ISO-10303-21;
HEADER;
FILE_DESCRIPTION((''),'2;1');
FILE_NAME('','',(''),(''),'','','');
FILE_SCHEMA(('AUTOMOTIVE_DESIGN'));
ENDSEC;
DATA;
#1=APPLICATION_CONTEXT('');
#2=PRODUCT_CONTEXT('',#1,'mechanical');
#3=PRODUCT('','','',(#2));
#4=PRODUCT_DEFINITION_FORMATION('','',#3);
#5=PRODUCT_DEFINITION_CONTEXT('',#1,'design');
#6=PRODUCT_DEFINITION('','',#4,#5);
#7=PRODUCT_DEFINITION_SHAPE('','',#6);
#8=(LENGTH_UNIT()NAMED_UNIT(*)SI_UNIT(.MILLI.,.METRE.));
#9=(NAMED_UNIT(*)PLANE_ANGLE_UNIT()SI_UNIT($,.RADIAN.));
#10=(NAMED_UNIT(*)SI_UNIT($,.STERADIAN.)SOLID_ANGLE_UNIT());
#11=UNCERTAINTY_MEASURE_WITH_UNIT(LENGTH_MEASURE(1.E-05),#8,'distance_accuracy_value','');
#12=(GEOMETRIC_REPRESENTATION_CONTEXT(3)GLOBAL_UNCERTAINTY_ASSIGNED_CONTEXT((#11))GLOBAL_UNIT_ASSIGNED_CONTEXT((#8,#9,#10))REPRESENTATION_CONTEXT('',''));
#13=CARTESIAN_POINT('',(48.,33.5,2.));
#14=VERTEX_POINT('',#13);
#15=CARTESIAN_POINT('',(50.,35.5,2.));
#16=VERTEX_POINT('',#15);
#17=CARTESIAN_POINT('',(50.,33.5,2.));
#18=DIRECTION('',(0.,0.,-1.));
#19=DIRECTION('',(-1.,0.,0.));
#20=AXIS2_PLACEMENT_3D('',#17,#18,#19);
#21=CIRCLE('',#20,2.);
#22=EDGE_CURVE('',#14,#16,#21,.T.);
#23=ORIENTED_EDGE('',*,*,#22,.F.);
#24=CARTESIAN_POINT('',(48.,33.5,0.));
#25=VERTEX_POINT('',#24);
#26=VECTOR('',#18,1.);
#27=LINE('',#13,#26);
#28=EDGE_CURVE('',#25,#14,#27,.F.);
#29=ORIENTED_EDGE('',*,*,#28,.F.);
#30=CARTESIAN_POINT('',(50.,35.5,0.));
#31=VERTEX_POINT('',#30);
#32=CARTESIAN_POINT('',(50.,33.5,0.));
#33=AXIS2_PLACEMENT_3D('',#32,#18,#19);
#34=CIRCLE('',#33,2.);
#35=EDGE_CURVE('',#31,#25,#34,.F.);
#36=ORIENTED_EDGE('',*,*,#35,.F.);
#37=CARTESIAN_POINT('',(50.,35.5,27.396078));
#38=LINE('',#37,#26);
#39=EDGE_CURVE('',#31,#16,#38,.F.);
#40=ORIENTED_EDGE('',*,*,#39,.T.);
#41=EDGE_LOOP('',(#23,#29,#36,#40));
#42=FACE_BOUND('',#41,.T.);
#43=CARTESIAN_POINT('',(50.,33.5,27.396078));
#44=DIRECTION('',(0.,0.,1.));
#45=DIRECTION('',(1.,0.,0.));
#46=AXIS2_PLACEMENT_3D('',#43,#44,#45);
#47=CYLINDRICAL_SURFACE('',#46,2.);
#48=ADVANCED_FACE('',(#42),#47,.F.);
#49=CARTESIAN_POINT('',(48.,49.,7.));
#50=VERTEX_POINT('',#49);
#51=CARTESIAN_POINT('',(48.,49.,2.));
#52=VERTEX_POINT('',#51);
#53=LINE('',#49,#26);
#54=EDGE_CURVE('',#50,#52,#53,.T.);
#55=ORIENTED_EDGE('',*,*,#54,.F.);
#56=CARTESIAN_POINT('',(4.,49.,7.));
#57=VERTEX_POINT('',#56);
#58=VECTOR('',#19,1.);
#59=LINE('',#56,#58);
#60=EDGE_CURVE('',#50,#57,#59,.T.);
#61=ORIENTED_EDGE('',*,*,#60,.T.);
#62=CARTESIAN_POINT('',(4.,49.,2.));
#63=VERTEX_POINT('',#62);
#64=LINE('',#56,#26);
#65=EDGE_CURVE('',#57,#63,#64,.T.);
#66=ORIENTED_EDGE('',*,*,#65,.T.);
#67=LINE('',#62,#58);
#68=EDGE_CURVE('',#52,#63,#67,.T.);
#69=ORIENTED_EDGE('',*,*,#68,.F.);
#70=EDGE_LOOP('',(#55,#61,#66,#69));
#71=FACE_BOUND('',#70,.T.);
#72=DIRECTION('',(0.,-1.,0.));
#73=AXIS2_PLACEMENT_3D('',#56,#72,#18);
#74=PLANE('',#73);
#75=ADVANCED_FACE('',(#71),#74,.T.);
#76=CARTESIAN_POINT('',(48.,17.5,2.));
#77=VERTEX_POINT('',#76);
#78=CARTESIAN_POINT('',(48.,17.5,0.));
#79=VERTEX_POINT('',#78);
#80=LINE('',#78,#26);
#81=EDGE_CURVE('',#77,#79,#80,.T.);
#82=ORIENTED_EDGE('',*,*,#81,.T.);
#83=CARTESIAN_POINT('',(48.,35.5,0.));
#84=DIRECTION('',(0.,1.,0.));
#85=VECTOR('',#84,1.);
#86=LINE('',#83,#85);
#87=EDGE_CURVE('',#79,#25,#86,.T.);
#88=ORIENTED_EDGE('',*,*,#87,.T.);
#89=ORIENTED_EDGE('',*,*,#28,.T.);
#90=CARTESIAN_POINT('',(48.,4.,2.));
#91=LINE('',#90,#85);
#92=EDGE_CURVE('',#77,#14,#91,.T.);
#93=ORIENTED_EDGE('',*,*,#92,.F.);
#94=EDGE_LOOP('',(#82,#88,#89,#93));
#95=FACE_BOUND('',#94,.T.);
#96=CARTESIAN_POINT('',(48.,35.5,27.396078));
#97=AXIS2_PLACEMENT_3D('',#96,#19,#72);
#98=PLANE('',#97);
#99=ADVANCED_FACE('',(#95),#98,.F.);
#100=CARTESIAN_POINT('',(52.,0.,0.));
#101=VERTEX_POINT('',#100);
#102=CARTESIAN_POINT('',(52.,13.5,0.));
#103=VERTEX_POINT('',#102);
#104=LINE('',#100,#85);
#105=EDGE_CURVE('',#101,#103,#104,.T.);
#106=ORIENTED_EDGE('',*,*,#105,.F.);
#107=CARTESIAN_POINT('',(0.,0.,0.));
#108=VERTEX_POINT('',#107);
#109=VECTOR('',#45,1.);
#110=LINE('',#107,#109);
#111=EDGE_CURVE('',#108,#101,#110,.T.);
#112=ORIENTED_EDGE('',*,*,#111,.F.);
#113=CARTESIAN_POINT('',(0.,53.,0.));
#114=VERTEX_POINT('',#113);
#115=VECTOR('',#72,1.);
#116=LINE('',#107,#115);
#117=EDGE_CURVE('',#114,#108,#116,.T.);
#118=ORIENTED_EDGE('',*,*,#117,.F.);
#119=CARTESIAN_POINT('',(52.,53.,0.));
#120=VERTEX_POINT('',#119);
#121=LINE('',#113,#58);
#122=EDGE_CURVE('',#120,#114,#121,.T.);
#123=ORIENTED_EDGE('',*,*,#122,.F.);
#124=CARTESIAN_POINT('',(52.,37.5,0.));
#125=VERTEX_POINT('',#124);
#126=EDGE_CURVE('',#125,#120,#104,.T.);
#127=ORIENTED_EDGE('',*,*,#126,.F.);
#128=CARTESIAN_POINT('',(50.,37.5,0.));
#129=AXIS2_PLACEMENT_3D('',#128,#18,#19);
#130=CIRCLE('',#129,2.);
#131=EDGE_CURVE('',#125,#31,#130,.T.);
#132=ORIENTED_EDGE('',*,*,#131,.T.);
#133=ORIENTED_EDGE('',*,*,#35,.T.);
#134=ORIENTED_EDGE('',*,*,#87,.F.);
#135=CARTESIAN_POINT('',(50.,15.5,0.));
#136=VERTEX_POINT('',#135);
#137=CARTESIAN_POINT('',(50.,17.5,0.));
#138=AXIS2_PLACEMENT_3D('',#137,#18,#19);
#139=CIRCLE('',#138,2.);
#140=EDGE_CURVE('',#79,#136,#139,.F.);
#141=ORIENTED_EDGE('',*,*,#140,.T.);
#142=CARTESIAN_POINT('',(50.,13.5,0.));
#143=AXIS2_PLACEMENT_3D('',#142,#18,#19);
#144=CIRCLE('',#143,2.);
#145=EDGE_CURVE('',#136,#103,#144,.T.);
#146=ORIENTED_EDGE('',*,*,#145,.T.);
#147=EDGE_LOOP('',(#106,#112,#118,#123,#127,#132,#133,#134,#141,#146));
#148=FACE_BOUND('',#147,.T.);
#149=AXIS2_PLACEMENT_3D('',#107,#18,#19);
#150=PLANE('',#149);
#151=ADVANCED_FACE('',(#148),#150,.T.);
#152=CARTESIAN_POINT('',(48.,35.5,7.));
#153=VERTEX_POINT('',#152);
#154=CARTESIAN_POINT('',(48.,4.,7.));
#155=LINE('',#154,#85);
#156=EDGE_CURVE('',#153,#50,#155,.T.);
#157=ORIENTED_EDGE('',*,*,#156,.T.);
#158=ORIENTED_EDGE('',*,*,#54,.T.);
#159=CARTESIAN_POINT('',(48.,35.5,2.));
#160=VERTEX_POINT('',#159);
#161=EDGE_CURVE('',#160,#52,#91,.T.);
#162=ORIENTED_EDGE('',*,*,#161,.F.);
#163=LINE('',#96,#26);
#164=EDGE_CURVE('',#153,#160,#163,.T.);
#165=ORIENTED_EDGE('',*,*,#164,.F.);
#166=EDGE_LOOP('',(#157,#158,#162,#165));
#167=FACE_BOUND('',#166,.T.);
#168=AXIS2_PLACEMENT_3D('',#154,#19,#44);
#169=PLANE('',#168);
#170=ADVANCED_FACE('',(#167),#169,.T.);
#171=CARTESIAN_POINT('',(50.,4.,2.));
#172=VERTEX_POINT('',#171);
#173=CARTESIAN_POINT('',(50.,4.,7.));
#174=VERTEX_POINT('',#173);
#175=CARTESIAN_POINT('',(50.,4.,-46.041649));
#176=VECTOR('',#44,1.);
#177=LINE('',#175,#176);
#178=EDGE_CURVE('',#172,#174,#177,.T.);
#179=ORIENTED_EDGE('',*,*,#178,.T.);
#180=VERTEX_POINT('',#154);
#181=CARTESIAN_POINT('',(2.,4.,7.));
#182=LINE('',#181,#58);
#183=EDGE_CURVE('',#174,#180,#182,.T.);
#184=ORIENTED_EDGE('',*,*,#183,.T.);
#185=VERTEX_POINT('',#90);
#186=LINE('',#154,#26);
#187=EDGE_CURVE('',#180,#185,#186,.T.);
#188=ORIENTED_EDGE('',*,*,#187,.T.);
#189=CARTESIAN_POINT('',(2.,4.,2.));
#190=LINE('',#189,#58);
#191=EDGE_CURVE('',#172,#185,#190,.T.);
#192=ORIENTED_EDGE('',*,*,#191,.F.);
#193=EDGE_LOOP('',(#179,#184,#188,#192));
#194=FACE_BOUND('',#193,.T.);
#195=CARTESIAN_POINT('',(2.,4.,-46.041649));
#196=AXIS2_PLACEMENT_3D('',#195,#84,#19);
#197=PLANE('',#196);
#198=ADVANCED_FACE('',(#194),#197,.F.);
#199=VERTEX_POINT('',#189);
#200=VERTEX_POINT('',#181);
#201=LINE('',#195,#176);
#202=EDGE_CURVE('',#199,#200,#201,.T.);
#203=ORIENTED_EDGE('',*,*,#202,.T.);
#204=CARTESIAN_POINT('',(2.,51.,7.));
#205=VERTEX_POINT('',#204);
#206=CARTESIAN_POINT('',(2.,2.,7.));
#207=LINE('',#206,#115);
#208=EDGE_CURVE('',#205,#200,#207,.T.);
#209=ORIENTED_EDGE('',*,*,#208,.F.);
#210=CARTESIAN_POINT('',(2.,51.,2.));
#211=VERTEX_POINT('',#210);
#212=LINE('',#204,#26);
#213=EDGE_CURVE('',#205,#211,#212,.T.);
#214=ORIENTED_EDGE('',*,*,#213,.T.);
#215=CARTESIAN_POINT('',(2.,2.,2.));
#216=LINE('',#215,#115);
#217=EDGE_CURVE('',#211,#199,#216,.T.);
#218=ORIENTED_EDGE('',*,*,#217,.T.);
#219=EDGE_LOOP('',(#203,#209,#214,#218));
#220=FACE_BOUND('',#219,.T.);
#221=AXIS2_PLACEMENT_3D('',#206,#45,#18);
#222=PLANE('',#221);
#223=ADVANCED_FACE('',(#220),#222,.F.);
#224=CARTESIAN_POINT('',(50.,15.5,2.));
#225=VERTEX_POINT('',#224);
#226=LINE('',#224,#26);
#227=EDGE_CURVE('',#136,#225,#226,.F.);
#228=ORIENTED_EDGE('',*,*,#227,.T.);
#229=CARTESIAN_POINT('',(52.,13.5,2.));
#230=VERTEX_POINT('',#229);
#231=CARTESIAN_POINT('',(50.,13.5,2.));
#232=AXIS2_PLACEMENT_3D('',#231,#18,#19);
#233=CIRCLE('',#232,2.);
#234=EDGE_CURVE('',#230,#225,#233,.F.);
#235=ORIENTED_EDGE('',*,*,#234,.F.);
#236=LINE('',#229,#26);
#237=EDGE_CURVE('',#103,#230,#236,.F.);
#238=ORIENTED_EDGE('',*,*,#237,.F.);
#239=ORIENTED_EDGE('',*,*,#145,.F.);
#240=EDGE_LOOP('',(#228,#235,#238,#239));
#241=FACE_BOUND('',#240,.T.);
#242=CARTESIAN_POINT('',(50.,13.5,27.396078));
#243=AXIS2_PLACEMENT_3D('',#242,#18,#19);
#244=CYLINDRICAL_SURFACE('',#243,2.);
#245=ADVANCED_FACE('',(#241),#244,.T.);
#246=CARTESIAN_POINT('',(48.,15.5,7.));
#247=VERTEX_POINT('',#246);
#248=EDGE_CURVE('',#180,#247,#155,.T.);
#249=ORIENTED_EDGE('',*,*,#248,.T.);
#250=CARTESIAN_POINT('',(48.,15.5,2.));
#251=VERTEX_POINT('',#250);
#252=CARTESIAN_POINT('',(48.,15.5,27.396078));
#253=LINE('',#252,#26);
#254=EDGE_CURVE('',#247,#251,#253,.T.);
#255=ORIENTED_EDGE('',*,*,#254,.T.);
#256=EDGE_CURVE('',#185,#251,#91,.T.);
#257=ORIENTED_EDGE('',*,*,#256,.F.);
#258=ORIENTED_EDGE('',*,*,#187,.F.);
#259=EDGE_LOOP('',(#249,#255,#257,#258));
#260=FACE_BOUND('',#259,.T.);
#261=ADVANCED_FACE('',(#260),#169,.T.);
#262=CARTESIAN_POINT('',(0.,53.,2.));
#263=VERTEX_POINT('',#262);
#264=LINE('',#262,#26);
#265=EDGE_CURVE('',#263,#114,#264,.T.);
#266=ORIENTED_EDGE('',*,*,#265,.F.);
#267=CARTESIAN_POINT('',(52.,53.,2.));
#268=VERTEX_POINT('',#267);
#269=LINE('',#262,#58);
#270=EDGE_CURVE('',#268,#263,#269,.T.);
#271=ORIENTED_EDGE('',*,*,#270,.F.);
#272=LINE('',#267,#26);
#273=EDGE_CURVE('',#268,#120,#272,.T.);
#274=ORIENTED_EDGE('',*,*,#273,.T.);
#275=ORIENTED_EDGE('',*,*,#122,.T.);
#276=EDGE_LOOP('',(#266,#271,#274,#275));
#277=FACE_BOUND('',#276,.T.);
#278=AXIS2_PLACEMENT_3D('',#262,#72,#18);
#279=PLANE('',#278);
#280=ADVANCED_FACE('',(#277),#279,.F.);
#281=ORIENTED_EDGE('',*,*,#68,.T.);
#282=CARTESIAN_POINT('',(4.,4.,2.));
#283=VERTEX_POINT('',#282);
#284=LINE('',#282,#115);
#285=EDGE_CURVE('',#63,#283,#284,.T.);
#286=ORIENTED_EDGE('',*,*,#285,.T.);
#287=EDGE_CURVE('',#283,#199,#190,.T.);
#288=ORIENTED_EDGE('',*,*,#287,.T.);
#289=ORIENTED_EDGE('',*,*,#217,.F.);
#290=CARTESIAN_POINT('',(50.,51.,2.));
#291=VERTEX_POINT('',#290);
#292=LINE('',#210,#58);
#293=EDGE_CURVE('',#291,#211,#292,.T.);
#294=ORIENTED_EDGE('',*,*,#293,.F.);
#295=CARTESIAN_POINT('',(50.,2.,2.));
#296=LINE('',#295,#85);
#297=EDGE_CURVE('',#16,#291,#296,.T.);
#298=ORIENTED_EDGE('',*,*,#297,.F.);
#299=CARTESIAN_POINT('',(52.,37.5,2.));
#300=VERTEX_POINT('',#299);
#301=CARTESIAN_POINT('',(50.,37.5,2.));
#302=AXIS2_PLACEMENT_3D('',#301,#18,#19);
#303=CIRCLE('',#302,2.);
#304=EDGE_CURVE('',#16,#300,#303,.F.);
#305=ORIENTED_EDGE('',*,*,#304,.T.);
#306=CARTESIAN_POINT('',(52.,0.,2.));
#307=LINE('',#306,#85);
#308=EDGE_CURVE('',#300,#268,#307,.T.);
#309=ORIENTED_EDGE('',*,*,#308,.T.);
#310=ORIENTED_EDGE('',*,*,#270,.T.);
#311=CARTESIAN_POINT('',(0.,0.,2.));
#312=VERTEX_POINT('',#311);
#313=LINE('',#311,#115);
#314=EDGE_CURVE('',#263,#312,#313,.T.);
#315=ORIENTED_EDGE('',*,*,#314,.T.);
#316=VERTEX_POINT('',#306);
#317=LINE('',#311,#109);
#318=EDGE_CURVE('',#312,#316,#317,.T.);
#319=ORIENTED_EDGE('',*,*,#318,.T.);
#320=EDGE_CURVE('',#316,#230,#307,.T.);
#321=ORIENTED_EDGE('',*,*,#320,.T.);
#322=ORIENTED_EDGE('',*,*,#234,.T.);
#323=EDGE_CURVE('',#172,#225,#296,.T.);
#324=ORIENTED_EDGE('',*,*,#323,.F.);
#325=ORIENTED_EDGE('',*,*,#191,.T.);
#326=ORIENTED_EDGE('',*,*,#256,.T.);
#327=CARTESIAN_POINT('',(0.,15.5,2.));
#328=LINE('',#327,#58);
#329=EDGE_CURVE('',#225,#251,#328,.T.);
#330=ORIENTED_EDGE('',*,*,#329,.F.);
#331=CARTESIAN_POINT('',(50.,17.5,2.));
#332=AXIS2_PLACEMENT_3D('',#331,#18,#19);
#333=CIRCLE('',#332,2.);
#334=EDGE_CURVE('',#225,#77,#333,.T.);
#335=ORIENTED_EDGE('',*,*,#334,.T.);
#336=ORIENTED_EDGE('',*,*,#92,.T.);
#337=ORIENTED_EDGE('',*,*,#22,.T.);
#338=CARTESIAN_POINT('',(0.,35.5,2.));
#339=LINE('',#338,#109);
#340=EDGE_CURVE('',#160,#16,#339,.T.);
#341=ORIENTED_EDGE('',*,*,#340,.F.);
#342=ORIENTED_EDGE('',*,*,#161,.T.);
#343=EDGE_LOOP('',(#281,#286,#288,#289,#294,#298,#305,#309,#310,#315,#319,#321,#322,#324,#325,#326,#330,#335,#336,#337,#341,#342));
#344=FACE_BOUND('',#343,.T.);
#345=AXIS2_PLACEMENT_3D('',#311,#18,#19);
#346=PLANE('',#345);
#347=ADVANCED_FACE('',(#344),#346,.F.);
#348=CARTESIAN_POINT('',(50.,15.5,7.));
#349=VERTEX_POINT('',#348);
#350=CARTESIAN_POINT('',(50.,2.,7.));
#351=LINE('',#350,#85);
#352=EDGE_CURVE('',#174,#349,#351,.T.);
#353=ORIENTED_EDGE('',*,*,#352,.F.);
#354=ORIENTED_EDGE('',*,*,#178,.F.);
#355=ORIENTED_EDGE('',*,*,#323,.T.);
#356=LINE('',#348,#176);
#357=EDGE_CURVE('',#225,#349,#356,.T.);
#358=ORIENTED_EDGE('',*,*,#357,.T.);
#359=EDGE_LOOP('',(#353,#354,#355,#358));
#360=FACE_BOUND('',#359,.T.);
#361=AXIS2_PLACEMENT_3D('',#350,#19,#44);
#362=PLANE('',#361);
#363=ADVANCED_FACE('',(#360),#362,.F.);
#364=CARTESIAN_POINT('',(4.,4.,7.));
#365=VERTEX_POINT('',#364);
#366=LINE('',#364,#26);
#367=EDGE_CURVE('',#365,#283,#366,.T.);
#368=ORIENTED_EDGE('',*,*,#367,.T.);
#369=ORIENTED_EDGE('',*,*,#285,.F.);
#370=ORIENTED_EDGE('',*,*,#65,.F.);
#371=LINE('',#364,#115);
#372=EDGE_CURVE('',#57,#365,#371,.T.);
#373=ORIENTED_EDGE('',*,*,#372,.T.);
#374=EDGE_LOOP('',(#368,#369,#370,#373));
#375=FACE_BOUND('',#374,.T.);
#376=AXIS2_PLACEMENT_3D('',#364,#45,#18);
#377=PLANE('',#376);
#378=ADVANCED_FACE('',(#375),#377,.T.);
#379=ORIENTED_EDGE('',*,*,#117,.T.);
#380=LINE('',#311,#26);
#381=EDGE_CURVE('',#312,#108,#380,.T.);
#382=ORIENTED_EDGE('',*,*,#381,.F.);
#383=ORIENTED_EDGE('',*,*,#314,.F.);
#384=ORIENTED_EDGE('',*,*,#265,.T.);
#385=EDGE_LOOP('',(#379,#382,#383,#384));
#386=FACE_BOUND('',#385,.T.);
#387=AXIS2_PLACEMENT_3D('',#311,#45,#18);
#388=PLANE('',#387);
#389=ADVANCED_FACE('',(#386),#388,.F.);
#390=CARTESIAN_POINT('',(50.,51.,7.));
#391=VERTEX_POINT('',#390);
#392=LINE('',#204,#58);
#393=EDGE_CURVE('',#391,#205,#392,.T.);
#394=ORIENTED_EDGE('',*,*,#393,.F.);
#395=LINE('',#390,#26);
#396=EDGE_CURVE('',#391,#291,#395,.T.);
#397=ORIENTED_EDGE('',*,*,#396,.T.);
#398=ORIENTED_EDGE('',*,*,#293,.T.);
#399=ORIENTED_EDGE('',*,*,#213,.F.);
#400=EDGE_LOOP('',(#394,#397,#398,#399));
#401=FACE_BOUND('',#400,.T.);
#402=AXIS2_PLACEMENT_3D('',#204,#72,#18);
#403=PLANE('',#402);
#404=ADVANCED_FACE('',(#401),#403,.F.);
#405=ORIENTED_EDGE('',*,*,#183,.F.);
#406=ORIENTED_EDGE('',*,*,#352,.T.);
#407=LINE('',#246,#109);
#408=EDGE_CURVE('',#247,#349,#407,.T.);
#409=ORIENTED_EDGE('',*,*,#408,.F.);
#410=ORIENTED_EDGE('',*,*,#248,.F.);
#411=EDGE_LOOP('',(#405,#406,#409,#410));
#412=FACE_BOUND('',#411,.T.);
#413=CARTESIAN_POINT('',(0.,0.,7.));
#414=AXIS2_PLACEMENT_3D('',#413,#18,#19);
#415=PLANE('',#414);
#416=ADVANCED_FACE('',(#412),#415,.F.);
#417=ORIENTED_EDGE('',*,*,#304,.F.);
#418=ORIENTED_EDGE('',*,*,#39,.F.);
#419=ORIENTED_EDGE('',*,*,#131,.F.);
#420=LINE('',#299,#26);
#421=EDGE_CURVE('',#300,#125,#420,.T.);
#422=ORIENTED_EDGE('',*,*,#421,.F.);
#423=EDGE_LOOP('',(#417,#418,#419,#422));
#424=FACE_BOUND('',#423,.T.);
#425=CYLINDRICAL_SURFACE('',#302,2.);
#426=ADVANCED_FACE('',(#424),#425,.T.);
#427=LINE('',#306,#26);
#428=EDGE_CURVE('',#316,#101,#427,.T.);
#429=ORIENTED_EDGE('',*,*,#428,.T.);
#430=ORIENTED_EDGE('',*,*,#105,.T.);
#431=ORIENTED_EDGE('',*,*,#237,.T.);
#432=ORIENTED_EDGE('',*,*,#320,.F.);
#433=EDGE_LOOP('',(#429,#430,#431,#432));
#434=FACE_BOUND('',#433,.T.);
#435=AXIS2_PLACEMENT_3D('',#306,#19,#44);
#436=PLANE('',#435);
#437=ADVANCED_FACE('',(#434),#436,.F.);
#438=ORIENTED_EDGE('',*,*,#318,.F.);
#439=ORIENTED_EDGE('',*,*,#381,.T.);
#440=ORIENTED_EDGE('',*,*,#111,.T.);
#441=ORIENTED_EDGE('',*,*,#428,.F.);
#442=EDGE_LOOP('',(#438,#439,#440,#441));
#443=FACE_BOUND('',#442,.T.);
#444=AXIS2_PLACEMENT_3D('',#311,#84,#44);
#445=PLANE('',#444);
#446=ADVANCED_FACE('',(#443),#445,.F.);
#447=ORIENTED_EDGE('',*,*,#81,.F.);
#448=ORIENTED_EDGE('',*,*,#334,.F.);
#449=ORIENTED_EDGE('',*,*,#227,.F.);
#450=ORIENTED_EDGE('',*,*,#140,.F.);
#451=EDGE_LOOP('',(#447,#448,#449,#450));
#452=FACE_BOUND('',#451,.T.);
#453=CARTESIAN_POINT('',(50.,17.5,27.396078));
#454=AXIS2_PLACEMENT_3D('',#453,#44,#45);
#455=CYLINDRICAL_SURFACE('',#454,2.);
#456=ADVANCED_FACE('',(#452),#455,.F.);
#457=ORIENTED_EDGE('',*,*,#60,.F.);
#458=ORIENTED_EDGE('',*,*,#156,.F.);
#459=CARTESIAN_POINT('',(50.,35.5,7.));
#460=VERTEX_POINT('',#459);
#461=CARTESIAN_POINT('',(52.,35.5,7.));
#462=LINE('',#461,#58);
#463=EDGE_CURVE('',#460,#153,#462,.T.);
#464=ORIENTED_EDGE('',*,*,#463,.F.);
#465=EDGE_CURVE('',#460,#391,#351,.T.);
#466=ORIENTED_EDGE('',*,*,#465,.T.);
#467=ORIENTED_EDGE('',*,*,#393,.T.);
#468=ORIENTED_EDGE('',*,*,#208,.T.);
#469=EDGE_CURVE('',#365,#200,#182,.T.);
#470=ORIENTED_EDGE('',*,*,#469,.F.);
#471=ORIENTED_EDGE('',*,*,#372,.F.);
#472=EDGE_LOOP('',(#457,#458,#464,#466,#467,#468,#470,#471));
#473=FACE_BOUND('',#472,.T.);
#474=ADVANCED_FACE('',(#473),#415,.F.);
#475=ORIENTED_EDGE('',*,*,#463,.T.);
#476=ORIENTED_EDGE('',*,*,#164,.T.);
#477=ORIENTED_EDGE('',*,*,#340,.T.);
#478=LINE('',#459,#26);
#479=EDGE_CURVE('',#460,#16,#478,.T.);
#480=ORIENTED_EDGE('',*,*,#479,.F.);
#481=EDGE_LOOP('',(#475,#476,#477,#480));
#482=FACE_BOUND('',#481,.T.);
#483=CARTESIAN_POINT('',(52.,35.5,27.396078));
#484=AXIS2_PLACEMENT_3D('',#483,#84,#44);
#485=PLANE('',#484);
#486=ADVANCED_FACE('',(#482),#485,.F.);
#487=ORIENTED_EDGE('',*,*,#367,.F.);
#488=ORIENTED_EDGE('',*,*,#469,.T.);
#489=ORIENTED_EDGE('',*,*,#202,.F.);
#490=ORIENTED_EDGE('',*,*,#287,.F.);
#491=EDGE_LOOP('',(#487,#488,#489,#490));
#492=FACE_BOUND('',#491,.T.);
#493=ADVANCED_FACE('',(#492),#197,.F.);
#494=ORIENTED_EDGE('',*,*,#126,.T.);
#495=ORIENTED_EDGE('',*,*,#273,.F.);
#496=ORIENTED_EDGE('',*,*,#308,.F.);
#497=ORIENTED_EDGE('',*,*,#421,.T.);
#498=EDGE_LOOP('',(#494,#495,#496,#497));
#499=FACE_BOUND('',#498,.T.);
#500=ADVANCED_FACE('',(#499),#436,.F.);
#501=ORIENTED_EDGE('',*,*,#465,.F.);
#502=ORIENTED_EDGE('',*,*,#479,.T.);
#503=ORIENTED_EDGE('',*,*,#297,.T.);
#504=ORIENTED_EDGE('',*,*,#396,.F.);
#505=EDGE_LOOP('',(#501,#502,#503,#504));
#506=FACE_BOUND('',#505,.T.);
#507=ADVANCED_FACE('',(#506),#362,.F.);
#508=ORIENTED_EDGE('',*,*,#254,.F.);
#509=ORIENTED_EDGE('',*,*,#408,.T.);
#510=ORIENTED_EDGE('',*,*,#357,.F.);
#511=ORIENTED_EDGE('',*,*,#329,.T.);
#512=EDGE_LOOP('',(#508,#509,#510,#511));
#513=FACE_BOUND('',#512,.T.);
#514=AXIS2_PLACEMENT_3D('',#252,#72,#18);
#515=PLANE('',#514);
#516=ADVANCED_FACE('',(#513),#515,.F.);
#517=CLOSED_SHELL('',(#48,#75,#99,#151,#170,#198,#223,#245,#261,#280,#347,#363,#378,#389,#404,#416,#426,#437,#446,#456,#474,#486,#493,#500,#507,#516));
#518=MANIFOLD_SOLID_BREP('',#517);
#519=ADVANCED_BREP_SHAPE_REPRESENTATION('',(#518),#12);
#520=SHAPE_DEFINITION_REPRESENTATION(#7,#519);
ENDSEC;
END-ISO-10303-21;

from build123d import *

# Parameters (mm, degrees)
SKETCH1_W           = 52
SKETCH1_H           = 53
BOSS_EXTRUDE1_DEPTH = 2
SKETCH2_W           = 48
SKETCH2_H           = 49
SKETCH2_W_2         = 44
SKETCH2_H_2         = 45
BOSS_EXTRUDE2_DEPTH = 5
CUT_EXTRUDE1_START  = -7
SKETCH3_W           = 4
SKETCH3_H           = 20
CUT_EXTRUDE1_DEPTH  = 7
FILLET1_R           = 2
SKETCH4_W           = 48
SKETCH4_H           = 2
CUT_EXTRUDE2_DEPTH  = 5


with BuildPart() as part:
    # Sketch1 → Boss-Extrude1 (new body)
    with BuildSketch(Plane.XY):
        with Locations((26, 26.5)):
            Rectangle(SKETCH1_W, SKETCH1_H)
    extrude(amount=BOSS_EXTRUDE1_DEPTH)

    # Sketch2 → Boss-Extrude2 (add)
    with BuildSketch(Plane.XY.offset(2)):
        with Locations((26, 26.5)):
            Rectangle(SKETCH2_W, SKETCH2_H)
        with Locations((26, 26.5)):
            Rectangle(SKETCH2_W_2, SKETCH2_H_2, mode=Mode.SUBTRACT)
    extrude(amount=BOSS_EXTRUDE2_DEPTH)

    # Sketch3 → Cut-Extrude1 (cut)
    with BuildSketch(Plane(origin=(0, 0, 0), x_dir=(-1, 0, 0), z_dir=(0, 0, -1)).offset(CUT_EXTRUDE1_START)):
        with Locations((-50, 25.5)):
            Rectangle(SKETCH3_W, SKETCH3_H)
    extrude(amount=CUT_EXTRUDE1_DEPTH, mode=Mode.SUBTRACT)

    # Fillet1
    fillet1_edges = [part.edges().sort_by_distance(p)[0] for p in [
        (48, 15.5, 1),
        (48, 35.5, 1),
    ]]
    fillet(fillet1_edges, radius=FILLET1_R)
    fillet1_2_edges = [part.edges().sort_by_distance(p)[0] for p in [
        (52, 15.5, 1),
        (52, 35.5, 1),
    ]]
    fillet(fillet1_2_edges, radius=FILLET1_R - 0.0001)  # a hair under: the kernel refuses the full size

    # Sketch4 → Cut-Extrude2 (cut)
    with BuildSketch(Plane.XY.offset(7)):
        with Locations((26, 3)):
            Rectangle(SKETCH4_W, SKETCH4_H)
    extrude(amount=-CUT_EXTRUDE2_DEPTH, mode=Mode.SUBTRACT)


solid = part.part
